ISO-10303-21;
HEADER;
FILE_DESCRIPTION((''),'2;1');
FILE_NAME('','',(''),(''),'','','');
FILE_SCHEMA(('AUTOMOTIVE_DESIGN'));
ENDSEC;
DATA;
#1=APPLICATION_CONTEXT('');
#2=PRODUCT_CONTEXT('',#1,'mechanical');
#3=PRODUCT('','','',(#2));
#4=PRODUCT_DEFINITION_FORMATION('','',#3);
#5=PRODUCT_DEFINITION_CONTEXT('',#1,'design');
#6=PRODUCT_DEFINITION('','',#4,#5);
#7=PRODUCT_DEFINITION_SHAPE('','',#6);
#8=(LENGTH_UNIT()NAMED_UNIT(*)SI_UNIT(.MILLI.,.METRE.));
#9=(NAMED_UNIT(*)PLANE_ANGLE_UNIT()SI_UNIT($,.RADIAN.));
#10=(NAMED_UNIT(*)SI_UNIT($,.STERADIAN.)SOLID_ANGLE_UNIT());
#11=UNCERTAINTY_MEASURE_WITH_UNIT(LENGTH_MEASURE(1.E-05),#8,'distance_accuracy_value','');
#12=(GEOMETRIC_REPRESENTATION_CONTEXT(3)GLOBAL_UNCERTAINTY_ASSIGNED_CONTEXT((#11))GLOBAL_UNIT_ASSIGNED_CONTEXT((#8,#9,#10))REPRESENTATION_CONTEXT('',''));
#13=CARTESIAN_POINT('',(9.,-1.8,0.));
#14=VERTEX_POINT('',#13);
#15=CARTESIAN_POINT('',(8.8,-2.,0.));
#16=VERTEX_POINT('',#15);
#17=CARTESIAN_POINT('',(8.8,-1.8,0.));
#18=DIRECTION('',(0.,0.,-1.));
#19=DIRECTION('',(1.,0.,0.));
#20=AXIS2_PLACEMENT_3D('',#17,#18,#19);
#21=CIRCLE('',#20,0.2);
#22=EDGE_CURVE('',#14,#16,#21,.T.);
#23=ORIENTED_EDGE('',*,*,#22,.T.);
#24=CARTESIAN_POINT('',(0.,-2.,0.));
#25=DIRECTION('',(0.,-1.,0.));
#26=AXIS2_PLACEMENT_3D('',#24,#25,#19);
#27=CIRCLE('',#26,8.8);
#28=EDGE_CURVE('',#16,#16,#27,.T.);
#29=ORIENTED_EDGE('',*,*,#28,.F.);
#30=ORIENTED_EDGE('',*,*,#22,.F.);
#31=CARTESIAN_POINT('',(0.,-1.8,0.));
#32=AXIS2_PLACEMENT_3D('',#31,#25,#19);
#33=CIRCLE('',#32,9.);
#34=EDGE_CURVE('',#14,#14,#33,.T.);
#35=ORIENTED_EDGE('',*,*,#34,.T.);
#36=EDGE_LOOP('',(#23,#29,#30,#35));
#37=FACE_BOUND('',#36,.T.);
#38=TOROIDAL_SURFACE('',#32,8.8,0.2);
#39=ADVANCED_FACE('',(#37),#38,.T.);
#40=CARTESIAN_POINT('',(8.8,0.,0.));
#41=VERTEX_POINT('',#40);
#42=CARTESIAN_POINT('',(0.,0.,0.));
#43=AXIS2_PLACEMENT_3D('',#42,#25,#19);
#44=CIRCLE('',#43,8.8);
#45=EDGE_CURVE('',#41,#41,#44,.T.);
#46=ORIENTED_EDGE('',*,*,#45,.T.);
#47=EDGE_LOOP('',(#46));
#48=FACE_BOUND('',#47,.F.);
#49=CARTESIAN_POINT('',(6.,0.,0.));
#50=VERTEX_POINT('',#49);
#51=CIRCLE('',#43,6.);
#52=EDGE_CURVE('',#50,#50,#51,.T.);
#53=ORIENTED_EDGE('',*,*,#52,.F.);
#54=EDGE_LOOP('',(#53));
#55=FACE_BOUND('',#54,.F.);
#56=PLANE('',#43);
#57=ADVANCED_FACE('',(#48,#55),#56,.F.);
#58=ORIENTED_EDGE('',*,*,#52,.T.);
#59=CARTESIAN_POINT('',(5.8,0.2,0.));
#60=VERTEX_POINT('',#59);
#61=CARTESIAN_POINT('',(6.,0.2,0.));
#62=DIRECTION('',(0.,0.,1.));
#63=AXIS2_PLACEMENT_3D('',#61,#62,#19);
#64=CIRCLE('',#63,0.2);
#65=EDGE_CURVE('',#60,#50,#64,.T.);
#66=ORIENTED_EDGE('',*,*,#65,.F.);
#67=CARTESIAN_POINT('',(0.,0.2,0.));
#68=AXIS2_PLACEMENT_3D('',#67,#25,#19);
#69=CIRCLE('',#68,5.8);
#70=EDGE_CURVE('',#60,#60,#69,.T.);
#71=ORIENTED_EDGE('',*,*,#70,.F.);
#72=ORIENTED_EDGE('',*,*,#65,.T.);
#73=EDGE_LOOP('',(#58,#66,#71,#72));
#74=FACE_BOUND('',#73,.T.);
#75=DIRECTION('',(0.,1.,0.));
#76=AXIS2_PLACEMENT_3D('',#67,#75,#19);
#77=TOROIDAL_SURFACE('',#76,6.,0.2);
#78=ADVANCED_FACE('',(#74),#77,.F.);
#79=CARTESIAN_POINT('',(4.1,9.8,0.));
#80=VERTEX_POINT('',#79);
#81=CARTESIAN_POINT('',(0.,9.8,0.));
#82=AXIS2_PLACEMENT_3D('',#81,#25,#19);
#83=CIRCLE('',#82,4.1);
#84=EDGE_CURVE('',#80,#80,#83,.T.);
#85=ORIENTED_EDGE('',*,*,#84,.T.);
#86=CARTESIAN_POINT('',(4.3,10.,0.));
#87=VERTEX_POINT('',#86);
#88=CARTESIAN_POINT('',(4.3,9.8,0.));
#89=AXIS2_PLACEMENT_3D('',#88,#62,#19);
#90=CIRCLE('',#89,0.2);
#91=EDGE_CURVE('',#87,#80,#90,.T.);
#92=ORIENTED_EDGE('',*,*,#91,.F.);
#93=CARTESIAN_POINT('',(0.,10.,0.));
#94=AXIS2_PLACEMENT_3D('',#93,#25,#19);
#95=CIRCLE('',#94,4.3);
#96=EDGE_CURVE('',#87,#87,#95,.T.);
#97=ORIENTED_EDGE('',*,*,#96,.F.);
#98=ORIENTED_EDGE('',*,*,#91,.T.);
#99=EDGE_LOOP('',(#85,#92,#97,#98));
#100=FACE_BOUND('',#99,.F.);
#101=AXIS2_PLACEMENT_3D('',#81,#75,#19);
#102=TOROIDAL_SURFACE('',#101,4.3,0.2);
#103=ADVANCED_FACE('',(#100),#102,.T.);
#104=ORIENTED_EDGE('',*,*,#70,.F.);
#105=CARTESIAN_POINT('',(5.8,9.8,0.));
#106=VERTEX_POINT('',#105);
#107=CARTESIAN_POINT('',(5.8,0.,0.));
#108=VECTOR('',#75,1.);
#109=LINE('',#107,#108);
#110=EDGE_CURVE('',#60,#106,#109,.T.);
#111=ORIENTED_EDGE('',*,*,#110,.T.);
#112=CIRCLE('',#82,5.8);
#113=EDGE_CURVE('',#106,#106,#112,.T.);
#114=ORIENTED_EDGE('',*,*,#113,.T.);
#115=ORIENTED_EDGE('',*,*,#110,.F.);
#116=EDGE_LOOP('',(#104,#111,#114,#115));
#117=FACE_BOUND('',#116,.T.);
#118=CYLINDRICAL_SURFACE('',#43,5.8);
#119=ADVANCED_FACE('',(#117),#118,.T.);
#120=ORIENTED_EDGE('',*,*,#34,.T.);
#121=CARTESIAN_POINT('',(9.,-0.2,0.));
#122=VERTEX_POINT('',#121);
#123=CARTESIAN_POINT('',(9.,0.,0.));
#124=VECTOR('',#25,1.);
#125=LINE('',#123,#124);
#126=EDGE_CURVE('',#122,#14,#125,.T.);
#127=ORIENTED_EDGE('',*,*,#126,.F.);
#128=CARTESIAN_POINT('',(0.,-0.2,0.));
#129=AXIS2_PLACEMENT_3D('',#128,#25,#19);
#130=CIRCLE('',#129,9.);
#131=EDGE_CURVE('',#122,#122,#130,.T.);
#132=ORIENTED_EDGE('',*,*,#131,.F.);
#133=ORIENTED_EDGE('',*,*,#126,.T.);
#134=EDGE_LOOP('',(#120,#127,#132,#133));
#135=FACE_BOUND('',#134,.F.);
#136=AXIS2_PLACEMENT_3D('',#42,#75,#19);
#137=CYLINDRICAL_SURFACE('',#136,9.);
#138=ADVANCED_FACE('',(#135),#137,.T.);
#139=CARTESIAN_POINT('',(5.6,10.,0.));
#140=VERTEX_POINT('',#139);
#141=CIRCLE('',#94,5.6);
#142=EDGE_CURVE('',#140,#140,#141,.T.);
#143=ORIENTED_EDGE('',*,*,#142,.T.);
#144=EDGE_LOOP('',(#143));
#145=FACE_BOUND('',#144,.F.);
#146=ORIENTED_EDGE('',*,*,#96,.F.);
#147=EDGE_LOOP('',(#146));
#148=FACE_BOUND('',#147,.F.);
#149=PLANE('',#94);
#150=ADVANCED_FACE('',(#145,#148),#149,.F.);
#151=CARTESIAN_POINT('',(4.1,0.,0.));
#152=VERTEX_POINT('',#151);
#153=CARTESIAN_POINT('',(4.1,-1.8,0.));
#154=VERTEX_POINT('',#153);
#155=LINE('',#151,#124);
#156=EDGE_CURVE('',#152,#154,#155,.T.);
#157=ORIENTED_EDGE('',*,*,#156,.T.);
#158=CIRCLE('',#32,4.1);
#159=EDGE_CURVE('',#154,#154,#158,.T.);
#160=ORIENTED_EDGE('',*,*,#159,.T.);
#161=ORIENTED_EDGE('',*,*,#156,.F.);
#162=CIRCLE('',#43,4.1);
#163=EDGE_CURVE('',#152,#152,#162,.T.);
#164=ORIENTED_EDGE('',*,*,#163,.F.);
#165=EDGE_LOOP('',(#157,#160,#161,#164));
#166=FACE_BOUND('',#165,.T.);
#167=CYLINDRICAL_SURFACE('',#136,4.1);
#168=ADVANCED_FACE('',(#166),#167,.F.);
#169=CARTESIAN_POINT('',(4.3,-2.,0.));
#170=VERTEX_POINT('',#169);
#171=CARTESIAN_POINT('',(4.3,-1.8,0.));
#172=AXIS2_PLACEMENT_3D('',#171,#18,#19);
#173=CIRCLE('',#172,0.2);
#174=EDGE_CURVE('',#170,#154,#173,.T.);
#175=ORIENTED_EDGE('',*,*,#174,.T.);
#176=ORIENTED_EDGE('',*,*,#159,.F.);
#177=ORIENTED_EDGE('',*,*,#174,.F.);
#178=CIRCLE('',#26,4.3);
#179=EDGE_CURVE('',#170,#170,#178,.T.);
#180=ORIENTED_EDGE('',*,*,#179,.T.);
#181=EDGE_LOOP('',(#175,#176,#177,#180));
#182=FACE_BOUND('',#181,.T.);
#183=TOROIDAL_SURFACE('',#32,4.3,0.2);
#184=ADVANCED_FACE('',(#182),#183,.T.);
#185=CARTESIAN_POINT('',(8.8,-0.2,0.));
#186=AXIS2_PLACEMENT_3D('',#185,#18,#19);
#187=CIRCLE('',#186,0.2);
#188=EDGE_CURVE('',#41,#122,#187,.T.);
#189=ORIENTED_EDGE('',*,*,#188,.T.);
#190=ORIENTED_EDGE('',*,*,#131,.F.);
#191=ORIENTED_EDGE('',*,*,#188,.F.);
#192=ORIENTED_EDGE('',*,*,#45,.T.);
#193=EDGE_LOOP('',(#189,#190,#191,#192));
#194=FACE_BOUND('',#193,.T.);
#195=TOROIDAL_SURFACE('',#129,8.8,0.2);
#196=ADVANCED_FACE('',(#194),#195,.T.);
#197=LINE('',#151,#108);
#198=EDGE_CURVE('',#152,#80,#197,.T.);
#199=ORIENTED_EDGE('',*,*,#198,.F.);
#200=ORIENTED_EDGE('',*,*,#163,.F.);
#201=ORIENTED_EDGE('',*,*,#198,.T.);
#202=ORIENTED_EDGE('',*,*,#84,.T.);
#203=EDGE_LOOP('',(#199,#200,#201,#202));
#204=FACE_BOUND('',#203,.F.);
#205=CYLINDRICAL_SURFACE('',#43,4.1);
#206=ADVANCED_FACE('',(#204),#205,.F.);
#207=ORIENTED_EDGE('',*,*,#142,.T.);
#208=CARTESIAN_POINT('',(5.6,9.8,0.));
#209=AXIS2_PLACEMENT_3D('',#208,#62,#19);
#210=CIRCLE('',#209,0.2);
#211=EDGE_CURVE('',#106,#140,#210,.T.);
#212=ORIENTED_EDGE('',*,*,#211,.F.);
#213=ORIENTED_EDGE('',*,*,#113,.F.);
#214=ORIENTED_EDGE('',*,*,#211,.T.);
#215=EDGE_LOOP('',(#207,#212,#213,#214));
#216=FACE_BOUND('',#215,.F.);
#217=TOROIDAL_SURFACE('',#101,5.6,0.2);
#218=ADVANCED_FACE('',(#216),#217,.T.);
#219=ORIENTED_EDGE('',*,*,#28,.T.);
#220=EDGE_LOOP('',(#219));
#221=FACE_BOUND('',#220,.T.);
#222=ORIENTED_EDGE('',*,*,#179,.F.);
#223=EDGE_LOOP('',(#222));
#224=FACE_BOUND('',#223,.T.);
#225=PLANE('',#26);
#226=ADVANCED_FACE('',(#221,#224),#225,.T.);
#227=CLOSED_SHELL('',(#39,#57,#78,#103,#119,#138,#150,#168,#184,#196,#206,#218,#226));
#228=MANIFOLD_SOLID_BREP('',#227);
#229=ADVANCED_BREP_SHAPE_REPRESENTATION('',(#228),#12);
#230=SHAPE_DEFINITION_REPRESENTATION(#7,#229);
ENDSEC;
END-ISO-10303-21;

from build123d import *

# Parameters (mm, degrees)
F0_R     = 9
F0_R_2   = 5.8
F0_R_3   = 4.1
F1_DEPTH = 2
F2_DEPTH = 10
F3_R     = 0.2


# Not quite as in the source:
# - a feature names something its author has since deleted; it is built from what else it names


with BuildPart() as f1:
    # F0 (on Front) → F1 (new body)
    with BuildSketch(Plane.XZ):
        Circle(F0_R)
        Circle(F0_R_2, mode=Mode.SUBTRACT)
        Circle(F0_R_2)
        Circle(F0_R_3, mode=Mode.SUBTRACT)
    extrude(amount=F1_DEPTH)

    # F0 (on Front) → F2 (join)
    with BuildSketch(Plane.XZ):
        Circle(F0_R_2)
        Circle(F0_R_3, mode=Mode.SUBTRACT)
    extrude(amount=-F2_DEPTH)

    # F3
    f3_edges = [f1.edges().sort_by_distance(p)[0] for p in [
        (-9, 0, 0),
        (-9, -2, 0),
        (5.8, 5, 0),
        (-5.8, 0, 0),
        (-5.8, 10, 0),
        (-4.1, 10, 0),
        (-4.1, -2, 0),
    ]]
    fillet(f3_edges, radius=F3_R)


solid = f1.part
